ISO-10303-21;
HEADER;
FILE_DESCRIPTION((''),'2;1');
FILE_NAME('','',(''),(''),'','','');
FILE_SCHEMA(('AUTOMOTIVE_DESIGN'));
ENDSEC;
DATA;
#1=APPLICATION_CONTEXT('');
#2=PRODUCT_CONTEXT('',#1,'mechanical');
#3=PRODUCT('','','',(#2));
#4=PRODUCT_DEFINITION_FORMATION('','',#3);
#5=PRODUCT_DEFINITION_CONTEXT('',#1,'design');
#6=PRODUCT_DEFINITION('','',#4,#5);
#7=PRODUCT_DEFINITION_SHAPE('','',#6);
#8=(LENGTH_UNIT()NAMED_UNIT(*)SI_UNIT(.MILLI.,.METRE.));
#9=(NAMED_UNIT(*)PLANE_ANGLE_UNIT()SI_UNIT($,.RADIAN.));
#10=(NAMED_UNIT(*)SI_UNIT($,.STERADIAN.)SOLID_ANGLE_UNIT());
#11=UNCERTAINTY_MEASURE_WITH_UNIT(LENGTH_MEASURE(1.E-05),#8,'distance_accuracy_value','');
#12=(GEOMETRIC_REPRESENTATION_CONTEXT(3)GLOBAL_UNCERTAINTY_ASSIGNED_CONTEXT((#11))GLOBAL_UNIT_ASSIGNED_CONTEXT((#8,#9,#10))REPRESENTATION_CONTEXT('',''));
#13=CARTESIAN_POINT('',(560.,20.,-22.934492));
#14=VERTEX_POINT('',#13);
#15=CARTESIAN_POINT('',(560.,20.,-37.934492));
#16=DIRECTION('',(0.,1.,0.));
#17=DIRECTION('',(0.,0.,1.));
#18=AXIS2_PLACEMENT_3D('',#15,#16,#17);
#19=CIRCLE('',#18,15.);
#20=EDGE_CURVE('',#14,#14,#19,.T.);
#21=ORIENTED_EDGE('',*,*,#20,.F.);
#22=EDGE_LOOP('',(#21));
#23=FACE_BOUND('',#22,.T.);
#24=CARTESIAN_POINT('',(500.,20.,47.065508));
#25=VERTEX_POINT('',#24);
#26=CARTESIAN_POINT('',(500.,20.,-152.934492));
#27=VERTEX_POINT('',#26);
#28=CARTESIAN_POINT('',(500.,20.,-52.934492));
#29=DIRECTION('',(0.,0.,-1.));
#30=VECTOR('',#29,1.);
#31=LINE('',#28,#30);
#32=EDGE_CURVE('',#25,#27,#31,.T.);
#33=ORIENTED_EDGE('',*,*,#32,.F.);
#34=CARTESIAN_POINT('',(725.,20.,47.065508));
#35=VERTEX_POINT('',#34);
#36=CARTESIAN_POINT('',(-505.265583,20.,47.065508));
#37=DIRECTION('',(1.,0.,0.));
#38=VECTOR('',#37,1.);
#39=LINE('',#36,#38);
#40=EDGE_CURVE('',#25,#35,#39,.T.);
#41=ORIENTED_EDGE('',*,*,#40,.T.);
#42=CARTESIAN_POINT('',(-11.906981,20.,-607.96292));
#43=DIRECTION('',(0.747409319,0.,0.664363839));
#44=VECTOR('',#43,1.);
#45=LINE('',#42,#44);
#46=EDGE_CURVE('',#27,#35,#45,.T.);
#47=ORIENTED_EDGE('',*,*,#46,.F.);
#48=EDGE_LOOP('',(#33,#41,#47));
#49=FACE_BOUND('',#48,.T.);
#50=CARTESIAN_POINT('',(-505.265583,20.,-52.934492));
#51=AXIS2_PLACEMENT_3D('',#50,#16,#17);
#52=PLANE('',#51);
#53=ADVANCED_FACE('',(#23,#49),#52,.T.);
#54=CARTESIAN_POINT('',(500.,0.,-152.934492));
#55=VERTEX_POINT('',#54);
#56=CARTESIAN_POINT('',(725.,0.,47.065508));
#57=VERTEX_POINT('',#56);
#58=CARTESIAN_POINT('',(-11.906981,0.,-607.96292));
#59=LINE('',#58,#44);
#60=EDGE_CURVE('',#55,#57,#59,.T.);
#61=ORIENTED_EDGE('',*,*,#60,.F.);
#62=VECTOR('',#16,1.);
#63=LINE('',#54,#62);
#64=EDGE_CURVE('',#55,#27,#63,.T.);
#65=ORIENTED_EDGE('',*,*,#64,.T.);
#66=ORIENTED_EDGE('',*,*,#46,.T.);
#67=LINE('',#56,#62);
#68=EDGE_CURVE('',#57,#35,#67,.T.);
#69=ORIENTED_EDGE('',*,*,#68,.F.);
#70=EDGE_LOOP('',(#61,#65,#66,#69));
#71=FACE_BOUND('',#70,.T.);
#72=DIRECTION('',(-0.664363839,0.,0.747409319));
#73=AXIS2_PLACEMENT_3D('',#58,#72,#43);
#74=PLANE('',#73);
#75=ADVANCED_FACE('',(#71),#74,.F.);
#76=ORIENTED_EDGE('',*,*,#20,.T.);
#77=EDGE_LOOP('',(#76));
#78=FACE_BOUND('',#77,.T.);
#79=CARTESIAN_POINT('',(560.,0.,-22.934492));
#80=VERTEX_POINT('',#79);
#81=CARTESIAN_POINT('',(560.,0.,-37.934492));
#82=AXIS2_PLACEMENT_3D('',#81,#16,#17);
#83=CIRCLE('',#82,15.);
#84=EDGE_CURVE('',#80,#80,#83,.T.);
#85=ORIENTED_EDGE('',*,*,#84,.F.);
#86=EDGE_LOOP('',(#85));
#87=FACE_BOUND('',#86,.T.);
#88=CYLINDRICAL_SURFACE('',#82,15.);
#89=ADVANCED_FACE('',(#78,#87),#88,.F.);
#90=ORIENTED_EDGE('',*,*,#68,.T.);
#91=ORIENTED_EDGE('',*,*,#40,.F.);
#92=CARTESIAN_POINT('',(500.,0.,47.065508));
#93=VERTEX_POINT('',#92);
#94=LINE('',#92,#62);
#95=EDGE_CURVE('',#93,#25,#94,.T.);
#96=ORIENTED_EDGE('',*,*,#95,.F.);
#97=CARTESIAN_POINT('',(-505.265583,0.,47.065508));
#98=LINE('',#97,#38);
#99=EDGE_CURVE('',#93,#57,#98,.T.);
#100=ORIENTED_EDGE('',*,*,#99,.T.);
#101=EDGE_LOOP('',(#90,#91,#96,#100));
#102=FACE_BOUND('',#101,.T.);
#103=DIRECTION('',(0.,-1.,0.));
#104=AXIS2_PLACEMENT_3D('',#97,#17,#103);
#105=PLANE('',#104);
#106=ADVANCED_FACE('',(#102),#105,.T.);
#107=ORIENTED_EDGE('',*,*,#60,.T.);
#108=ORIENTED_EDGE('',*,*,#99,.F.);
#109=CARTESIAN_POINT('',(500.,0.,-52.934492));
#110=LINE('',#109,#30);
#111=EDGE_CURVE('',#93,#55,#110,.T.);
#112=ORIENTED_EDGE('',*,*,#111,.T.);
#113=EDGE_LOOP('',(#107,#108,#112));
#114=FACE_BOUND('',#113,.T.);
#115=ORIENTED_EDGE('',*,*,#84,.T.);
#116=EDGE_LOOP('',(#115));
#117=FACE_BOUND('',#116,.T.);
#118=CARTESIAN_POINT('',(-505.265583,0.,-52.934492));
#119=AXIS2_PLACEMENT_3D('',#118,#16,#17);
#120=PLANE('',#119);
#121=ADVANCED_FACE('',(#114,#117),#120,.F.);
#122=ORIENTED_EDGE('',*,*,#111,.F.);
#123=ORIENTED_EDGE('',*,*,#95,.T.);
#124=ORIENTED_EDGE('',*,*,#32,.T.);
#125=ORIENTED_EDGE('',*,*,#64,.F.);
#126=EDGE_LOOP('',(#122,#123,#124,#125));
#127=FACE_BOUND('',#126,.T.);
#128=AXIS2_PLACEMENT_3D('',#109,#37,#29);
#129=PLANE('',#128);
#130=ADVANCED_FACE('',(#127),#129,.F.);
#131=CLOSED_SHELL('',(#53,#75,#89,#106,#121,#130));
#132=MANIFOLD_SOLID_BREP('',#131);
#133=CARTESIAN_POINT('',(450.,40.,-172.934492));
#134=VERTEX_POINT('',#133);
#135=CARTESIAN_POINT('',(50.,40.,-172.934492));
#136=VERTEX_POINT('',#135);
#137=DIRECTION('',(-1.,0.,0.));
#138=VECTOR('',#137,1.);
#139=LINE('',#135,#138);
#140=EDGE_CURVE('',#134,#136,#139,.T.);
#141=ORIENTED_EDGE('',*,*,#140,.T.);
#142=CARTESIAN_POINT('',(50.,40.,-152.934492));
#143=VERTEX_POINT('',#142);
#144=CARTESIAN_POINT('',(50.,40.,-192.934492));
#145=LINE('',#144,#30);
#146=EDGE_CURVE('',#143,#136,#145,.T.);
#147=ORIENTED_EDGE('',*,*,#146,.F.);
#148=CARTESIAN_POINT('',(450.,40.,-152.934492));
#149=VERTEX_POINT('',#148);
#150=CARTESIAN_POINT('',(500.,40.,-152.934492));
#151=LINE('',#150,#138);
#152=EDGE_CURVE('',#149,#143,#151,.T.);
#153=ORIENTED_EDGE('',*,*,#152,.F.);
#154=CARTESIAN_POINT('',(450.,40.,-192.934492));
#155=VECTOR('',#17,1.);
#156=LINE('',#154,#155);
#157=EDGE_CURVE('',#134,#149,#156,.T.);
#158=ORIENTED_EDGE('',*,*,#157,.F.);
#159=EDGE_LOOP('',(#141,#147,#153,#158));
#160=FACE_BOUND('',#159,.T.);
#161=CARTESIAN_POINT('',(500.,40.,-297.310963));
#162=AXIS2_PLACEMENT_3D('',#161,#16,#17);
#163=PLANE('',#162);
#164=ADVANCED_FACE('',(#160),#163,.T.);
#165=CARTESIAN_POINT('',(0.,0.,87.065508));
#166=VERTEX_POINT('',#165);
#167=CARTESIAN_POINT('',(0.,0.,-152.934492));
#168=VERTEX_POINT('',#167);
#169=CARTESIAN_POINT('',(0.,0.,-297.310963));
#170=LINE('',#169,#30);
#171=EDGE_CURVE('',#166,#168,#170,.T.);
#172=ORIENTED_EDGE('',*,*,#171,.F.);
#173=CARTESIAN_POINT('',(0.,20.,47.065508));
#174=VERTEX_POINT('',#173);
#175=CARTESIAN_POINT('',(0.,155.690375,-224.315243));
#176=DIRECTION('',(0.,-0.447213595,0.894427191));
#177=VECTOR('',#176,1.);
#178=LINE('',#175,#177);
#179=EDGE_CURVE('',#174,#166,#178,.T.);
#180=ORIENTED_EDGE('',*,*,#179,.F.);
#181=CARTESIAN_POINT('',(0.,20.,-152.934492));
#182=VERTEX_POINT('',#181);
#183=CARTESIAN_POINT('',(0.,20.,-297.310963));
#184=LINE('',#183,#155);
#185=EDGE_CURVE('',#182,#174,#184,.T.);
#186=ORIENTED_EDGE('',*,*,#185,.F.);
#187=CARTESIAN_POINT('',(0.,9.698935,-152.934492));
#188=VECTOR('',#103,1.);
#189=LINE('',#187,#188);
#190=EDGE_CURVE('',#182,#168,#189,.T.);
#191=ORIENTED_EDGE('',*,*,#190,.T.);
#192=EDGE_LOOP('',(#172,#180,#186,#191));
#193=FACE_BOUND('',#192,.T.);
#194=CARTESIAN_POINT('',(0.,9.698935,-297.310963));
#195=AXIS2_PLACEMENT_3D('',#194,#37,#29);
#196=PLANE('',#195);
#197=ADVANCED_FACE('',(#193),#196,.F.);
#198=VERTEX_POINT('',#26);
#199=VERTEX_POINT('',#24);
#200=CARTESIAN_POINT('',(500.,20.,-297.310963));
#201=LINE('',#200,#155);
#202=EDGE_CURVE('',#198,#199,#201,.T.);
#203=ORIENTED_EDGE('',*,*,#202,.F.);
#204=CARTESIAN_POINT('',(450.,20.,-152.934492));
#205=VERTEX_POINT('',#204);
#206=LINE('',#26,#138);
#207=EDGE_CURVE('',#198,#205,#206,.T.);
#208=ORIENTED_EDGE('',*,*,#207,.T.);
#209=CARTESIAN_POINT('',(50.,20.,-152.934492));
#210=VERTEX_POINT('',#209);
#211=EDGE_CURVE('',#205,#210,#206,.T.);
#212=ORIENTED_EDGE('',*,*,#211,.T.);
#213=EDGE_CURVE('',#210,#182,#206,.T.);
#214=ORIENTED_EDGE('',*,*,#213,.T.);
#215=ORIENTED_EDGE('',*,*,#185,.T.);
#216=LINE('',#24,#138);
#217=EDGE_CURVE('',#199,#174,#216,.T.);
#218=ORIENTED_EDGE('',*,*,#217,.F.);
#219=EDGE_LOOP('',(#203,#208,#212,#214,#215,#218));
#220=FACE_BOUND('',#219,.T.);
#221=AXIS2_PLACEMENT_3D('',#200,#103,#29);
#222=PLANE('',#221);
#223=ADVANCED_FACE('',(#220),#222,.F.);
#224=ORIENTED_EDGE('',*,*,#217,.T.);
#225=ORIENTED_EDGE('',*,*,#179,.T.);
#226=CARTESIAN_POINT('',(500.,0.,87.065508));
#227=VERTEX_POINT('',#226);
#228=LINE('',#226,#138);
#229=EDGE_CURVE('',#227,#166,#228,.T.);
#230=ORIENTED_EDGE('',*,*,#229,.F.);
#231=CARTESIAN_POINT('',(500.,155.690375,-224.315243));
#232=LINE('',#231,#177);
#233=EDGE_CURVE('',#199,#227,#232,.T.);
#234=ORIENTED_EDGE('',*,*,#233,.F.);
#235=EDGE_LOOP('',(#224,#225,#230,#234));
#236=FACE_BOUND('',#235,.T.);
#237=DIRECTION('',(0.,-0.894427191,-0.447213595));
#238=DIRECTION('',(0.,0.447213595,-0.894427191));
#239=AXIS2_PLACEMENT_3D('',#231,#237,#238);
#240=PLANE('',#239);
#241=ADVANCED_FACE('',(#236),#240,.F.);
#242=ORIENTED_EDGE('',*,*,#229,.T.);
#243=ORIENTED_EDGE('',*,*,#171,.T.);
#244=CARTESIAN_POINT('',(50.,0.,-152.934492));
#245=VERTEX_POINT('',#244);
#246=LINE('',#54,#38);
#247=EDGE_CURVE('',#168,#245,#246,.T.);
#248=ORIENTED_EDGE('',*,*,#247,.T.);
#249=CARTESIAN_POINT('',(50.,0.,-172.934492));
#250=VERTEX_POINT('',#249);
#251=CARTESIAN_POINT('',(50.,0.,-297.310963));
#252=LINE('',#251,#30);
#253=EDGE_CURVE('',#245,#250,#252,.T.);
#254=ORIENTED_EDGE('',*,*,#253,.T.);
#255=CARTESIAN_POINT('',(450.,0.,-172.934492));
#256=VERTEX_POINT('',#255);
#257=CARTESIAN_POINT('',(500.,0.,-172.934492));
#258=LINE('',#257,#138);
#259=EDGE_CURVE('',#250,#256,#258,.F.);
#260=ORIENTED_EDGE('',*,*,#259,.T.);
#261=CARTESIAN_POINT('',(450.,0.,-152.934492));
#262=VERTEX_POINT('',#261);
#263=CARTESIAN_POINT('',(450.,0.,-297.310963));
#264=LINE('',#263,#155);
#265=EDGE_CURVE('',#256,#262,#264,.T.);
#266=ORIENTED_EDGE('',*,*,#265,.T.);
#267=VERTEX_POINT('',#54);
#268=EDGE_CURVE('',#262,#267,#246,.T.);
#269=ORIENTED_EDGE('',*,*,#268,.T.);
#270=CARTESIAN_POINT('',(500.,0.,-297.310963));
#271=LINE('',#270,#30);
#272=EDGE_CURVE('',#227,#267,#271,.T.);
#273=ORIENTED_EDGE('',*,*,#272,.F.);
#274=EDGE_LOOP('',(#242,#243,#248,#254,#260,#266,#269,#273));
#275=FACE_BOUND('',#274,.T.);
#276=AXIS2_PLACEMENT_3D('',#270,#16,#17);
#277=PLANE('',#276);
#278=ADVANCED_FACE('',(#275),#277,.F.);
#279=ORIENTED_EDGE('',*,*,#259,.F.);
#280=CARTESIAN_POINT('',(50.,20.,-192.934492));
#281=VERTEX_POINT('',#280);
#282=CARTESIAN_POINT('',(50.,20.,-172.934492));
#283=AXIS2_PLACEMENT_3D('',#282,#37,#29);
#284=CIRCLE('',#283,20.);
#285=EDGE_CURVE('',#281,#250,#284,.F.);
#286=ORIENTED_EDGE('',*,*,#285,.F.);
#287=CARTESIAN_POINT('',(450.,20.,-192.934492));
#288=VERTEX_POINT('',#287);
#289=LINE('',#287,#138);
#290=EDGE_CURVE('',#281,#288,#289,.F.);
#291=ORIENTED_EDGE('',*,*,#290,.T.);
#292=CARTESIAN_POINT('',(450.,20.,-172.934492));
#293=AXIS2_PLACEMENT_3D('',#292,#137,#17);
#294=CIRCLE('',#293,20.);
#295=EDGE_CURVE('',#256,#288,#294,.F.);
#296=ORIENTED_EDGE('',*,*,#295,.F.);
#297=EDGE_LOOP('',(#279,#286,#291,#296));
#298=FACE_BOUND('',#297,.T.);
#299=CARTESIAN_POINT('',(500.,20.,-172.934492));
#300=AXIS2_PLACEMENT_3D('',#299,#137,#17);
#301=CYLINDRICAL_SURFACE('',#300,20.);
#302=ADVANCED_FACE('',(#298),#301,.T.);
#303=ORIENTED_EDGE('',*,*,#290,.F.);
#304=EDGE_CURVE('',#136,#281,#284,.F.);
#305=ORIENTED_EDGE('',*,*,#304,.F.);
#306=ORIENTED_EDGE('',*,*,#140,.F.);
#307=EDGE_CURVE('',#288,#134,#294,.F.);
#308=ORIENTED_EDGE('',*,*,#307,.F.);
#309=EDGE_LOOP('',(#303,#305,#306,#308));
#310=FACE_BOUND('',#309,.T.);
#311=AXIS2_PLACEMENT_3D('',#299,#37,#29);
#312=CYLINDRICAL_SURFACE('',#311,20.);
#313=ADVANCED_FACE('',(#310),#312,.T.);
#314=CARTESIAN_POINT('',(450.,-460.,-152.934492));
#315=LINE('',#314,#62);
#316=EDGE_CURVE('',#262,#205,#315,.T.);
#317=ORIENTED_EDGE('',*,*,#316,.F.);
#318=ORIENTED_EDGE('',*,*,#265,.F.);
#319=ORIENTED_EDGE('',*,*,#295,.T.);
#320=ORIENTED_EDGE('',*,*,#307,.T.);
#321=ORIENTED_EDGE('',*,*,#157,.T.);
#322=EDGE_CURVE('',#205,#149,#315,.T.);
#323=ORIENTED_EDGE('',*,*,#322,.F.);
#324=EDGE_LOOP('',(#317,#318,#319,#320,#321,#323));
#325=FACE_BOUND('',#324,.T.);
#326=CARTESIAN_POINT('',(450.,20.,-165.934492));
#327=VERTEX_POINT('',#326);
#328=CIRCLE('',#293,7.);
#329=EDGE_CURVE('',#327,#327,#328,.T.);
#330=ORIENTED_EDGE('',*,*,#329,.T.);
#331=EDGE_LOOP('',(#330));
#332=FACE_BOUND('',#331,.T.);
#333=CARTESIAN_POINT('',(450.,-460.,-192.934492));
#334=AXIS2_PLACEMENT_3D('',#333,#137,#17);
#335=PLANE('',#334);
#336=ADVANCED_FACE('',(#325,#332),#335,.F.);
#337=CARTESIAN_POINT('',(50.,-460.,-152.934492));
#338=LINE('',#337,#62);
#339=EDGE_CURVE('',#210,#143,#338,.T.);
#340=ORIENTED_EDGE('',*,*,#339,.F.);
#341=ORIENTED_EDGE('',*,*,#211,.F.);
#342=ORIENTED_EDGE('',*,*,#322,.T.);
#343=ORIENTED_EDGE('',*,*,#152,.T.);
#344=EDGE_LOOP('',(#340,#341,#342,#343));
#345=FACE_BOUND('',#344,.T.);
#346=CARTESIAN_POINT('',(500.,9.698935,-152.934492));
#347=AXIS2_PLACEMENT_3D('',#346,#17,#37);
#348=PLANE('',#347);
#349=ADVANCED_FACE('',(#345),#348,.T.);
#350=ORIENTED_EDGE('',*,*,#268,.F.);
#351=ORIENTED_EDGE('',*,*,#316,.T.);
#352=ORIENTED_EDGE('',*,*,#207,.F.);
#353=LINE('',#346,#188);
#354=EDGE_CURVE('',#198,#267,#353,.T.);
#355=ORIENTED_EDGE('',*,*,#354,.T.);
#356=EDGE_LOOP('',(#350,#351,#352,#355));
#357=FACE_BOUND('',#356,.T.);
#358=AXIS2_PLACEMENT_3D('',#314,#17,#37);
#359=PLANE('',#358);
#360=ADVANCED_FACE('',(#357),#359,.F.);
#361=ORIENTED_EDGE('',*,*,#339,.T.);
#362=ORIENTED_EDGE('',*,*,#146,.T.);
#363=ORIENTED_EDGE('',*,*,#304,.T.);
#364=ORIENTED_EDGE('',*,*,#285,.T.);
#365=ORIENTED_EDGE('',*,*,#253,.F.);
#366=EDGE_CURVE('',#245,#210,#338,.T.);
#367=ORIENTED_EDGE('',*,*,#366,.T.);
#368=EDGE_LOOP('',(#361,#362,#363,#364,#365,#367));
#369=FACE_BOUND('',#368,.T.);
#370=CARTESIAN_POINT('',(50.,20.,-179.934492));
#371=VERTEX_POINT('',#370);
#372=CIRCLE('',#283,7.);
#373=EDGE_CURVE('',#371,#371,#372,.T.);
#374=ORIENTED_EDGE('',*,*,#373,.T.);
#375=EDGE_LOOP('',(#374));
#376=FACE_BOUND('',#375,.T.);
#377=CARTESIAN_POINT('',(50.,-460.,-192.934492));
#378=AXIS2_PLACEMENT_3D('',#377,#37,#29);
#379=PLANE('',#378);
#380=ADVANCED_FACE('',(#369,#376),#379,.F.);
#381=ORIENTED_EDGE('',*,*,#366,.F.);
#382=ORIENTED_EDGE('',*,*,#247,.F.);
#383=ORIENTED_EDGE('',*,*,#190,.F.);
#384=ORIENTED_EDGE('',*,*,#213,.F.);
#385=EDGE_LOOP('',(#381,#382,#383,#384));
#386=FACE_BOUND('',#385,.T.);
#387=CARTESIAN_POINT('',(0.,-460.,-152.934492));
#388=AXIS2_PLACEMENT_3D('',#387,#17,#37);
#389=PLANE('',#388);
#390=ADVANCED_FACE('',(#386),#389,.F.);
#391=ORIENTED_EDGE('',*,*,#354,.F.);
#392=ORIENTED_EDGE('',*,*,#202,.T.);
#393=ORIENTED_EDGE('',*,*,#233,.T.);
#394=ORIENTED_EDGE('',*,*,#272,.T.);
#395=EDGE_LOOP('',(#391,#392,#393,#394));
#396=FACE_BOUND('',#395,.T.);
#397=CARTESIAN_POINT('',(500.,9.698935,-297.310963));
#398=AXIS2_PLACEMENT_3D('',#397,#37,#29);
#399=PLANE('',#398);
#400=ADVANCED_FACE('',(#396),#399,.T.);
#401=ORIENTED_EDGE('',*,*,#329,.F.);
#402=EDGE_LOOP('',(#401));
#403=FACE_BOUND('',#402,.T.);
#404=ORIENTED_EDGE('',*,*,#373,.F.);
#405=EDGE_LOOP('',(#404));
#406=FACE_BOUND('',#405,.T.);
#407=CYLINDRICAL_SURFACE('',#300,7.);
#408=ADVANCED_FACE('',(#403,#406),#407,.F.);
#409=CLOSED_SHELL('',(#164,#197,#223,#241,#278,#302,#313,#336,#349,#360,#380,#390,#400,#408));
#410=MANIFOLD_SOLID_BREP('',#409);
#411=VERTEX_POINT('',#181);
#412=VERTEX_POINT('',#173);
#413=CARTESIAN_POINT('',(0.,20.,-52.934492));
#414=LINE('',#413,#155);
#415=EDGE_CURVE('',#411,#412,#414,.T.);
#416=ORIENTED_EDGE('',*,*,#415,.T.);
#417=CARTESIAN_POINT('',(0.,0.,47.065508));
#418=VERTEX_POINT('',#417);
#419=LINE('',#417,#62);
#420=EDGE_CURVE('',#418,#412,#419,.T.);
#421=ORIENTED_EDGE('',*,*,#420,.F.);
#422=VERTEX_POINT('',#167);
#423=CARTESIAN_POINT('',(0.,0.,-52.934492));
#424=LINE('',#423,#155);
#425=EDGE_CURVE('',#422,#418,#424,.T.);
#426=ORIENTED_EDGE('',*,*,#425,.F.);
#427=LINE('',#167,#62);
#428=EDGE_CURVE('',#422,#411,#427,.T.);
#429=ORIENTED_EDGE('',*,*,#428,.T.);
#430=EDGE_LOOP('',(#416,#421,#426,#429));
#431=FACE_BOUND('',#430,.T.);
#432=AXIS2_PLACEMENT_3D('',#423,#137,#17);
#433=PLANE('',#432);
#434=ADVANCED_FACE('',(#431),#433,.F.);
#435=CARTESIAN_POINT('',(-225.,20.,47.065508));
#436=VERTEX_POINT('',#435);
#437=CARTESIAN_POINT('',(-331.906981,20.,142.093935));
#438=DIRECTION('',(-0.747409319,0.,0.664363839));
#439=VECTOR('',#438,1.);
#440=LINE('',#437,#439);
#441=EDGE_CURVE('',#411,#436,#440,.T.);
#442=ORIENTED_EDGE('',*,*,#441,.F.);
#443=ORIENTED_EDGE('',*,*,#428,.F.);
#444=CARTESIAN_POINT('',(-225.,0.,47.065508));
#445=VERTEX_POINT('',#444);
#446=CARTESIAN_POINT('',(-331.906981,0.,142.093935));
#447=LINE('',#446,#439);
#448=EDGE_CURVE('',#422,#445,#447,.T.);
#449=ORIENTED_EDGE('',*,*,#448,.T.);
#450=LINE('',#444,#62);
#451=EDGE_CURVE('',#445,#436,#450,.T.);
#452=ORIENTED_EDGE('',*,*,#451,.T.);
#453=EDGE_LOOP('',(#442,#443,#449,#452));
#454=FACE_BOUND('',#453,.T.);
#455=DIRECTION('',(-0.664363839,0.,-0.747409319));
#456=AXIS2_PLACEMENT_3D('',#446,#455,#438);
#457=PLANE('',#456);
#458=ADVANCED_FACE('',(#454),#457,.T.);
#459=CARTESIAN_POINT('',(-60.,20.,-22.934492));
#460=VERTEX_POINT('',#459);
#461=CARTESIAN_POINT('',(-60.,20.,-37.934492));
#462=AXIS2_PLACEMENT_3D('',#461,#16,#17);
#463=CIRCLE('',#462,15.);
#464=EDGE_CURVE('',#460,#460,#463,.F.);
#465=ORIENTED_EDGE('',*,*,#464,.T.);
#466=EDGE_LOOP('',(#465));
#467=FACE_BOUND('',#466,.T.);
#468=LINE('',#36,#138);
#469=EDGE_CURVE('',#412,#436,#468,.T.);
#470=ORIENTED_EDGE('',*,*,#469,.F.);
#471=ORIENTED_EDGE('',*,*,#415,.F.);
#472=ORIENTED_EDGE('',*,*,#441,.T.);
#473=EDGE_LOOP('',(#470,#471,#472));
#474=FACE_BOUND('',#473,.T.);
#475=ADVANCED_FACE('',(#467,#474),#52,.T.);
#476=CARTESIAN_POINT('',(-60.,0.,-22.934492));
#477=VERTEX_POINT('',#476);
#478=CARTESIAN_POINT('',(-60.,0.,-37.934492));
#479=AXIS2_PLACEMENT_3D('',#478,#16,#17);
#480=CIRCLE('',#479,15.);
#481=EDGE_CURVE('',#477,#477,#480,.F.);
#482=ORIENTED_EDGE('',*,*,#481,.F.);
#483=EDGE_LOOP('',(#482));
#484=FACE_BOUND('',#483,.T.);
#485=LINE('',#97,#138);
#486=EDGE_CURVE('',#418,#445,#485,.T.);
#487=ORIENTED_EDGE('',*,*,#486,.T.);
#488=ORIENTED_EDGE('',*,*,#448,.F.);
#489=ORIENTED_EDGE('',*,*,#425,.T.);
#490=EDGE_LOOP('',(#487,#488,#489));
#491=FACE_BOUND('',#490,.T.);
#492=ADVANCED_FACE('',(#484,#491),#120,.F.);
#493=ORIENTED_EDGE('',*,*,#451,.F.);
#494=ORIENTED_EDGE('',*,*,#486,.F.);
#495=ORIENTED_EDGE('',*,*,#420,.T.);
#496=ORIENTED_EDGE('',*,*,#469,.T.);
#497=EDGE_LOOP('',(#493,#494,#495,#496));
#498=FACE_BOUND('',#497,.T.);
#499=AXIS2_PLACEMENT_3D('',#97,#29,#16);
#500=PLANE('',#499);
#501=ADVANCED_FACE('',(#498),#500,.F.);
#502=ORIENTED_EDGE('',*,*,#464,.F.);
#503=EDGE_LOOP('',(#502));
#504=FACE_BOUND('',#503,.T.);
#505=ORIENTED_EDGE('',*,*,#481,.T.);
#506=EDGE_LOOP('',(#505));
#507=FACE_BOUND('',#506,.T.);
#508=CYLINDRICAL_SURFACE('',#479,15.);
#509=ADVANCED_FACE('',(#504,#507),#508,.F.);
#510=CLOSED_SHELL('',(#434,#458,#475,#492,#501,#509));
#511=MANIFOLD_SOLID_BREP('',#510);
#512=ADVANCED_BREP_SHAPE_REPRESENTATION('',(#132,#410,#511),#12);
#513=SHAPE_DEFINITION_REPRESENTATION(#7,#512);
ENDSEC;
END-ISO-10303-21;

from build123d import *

# Parameters (mm, degrees)
SKETCH_1_R          = 7
EXTRUDE_1_DEPTH     = 500
SKETCH_2_W          = 50
SKETCH_2_H          = 40
CUT_EXTRUDE_1_DEPTH = 500
SKETCH_3_R          = 15
EXTRUDE_2_DEPTH     = 20
EXTRUDE_2_2_DEPTH   = 20
FILLET_2_R          = 20


with BuildPart() as part:
    # 草图1 → 凸台-拉伸1 (new body)
    # profile 1 of 2: a face of its own
    with BuildSketch(Plane(origin=(0, 0, 0), x_dir=(0, 0, -1), z_dir=(1, 0, 0))):
        Polygon((152.934492446, 20), (152.934492446, 0), (192.934492446, 0), (192.934492446, 40), (152.934492446, 40), align=None)
        with Locations((172.934492446, 20)):
            Circle(SKETCH_1_R, mode=Mode.SUBTRACT)
    # profile 2 of 2: a face of its own
    with BuildSketch(Plane(origin=(0, 0, 0), x_dir=(0, 0, -1), z_dir=(1, 0, 0))):
        Polygon((152.934492446, 20), (-47.065507554, 20), (-87.065507554, 0), (152.934492446, 0), align=None)
    extrude(amount=EXTRUDE_1_DEPTH)

    # 草图2 → 切除-拉伸1 (cut)
    with BuildSketch(Plane(origin=(0, 40, 0), x_dir=(1, 0, 0), z_dir=(0, 1, 0))):
        with Locations((25, 172.934492446)):
            Rectangle(SKETCH_2_W, SKETCH_2_H)
        with Locations((475, 172.934492446)):
            Rectangle(SKETCH_2_W, SKETCH_2_H)
    extrude(amount=-CUT_EXTRUDE_1_DEPTH, mode=Mode.SUBTRACT)

    # 圆角2
    fillet_2_edges = [part.edges().sort_by_distance(p)[0] for p in [
        (250, 0, -192.934492446),
        (250, 40, -192.934492446),
    ]]
    fillet(fillet_2_edges, radius=FILLET_2_R - 0.0001)  # a hair under: the kernel refuses the full size


with BuildPart() as body_2:
    # 草图3 → 凸台-拉伸2 (new body)
    with BuildSketch(Plane(origin=(0, 20, 0), x_dir=(1, 0, 0), z_dir=(0, 1, 0))):
        Polygon((500, 152.934492446), (500, -47.065507554), (725, -47.065507554), align=None)
        with Locations(Location((560, 37.934492446, 0), (0, 0, 270))):
            Circle(SKETCH_3_R, mode=Mode.SUBTRACT)
    extrude(amount=-EXTRUDE_2_DEPTH)


with BuildPart() as body_3:
    # 草图3 → Extrude 2 2 (new body)
    with BuildSketch(Plane(origin=(0, 20, 0), x_dir=(1, 0, 0), z_dir=(0, 1, 0))):
        Polygon((-225, -47.065507554), (0, -47.065507554), (0, 152.934492446), align=None)
        with Locations(Location((-60, 37.934492446, 0), (0, 0, 270))):
            Circle(SKETCH_3_R, mode=Mode.SUBTRACT)
    extrude(amount=-EXTRUDE_2_2_DEPTH)


solid = Compound([part.part, body_2.part, body_3.part])
